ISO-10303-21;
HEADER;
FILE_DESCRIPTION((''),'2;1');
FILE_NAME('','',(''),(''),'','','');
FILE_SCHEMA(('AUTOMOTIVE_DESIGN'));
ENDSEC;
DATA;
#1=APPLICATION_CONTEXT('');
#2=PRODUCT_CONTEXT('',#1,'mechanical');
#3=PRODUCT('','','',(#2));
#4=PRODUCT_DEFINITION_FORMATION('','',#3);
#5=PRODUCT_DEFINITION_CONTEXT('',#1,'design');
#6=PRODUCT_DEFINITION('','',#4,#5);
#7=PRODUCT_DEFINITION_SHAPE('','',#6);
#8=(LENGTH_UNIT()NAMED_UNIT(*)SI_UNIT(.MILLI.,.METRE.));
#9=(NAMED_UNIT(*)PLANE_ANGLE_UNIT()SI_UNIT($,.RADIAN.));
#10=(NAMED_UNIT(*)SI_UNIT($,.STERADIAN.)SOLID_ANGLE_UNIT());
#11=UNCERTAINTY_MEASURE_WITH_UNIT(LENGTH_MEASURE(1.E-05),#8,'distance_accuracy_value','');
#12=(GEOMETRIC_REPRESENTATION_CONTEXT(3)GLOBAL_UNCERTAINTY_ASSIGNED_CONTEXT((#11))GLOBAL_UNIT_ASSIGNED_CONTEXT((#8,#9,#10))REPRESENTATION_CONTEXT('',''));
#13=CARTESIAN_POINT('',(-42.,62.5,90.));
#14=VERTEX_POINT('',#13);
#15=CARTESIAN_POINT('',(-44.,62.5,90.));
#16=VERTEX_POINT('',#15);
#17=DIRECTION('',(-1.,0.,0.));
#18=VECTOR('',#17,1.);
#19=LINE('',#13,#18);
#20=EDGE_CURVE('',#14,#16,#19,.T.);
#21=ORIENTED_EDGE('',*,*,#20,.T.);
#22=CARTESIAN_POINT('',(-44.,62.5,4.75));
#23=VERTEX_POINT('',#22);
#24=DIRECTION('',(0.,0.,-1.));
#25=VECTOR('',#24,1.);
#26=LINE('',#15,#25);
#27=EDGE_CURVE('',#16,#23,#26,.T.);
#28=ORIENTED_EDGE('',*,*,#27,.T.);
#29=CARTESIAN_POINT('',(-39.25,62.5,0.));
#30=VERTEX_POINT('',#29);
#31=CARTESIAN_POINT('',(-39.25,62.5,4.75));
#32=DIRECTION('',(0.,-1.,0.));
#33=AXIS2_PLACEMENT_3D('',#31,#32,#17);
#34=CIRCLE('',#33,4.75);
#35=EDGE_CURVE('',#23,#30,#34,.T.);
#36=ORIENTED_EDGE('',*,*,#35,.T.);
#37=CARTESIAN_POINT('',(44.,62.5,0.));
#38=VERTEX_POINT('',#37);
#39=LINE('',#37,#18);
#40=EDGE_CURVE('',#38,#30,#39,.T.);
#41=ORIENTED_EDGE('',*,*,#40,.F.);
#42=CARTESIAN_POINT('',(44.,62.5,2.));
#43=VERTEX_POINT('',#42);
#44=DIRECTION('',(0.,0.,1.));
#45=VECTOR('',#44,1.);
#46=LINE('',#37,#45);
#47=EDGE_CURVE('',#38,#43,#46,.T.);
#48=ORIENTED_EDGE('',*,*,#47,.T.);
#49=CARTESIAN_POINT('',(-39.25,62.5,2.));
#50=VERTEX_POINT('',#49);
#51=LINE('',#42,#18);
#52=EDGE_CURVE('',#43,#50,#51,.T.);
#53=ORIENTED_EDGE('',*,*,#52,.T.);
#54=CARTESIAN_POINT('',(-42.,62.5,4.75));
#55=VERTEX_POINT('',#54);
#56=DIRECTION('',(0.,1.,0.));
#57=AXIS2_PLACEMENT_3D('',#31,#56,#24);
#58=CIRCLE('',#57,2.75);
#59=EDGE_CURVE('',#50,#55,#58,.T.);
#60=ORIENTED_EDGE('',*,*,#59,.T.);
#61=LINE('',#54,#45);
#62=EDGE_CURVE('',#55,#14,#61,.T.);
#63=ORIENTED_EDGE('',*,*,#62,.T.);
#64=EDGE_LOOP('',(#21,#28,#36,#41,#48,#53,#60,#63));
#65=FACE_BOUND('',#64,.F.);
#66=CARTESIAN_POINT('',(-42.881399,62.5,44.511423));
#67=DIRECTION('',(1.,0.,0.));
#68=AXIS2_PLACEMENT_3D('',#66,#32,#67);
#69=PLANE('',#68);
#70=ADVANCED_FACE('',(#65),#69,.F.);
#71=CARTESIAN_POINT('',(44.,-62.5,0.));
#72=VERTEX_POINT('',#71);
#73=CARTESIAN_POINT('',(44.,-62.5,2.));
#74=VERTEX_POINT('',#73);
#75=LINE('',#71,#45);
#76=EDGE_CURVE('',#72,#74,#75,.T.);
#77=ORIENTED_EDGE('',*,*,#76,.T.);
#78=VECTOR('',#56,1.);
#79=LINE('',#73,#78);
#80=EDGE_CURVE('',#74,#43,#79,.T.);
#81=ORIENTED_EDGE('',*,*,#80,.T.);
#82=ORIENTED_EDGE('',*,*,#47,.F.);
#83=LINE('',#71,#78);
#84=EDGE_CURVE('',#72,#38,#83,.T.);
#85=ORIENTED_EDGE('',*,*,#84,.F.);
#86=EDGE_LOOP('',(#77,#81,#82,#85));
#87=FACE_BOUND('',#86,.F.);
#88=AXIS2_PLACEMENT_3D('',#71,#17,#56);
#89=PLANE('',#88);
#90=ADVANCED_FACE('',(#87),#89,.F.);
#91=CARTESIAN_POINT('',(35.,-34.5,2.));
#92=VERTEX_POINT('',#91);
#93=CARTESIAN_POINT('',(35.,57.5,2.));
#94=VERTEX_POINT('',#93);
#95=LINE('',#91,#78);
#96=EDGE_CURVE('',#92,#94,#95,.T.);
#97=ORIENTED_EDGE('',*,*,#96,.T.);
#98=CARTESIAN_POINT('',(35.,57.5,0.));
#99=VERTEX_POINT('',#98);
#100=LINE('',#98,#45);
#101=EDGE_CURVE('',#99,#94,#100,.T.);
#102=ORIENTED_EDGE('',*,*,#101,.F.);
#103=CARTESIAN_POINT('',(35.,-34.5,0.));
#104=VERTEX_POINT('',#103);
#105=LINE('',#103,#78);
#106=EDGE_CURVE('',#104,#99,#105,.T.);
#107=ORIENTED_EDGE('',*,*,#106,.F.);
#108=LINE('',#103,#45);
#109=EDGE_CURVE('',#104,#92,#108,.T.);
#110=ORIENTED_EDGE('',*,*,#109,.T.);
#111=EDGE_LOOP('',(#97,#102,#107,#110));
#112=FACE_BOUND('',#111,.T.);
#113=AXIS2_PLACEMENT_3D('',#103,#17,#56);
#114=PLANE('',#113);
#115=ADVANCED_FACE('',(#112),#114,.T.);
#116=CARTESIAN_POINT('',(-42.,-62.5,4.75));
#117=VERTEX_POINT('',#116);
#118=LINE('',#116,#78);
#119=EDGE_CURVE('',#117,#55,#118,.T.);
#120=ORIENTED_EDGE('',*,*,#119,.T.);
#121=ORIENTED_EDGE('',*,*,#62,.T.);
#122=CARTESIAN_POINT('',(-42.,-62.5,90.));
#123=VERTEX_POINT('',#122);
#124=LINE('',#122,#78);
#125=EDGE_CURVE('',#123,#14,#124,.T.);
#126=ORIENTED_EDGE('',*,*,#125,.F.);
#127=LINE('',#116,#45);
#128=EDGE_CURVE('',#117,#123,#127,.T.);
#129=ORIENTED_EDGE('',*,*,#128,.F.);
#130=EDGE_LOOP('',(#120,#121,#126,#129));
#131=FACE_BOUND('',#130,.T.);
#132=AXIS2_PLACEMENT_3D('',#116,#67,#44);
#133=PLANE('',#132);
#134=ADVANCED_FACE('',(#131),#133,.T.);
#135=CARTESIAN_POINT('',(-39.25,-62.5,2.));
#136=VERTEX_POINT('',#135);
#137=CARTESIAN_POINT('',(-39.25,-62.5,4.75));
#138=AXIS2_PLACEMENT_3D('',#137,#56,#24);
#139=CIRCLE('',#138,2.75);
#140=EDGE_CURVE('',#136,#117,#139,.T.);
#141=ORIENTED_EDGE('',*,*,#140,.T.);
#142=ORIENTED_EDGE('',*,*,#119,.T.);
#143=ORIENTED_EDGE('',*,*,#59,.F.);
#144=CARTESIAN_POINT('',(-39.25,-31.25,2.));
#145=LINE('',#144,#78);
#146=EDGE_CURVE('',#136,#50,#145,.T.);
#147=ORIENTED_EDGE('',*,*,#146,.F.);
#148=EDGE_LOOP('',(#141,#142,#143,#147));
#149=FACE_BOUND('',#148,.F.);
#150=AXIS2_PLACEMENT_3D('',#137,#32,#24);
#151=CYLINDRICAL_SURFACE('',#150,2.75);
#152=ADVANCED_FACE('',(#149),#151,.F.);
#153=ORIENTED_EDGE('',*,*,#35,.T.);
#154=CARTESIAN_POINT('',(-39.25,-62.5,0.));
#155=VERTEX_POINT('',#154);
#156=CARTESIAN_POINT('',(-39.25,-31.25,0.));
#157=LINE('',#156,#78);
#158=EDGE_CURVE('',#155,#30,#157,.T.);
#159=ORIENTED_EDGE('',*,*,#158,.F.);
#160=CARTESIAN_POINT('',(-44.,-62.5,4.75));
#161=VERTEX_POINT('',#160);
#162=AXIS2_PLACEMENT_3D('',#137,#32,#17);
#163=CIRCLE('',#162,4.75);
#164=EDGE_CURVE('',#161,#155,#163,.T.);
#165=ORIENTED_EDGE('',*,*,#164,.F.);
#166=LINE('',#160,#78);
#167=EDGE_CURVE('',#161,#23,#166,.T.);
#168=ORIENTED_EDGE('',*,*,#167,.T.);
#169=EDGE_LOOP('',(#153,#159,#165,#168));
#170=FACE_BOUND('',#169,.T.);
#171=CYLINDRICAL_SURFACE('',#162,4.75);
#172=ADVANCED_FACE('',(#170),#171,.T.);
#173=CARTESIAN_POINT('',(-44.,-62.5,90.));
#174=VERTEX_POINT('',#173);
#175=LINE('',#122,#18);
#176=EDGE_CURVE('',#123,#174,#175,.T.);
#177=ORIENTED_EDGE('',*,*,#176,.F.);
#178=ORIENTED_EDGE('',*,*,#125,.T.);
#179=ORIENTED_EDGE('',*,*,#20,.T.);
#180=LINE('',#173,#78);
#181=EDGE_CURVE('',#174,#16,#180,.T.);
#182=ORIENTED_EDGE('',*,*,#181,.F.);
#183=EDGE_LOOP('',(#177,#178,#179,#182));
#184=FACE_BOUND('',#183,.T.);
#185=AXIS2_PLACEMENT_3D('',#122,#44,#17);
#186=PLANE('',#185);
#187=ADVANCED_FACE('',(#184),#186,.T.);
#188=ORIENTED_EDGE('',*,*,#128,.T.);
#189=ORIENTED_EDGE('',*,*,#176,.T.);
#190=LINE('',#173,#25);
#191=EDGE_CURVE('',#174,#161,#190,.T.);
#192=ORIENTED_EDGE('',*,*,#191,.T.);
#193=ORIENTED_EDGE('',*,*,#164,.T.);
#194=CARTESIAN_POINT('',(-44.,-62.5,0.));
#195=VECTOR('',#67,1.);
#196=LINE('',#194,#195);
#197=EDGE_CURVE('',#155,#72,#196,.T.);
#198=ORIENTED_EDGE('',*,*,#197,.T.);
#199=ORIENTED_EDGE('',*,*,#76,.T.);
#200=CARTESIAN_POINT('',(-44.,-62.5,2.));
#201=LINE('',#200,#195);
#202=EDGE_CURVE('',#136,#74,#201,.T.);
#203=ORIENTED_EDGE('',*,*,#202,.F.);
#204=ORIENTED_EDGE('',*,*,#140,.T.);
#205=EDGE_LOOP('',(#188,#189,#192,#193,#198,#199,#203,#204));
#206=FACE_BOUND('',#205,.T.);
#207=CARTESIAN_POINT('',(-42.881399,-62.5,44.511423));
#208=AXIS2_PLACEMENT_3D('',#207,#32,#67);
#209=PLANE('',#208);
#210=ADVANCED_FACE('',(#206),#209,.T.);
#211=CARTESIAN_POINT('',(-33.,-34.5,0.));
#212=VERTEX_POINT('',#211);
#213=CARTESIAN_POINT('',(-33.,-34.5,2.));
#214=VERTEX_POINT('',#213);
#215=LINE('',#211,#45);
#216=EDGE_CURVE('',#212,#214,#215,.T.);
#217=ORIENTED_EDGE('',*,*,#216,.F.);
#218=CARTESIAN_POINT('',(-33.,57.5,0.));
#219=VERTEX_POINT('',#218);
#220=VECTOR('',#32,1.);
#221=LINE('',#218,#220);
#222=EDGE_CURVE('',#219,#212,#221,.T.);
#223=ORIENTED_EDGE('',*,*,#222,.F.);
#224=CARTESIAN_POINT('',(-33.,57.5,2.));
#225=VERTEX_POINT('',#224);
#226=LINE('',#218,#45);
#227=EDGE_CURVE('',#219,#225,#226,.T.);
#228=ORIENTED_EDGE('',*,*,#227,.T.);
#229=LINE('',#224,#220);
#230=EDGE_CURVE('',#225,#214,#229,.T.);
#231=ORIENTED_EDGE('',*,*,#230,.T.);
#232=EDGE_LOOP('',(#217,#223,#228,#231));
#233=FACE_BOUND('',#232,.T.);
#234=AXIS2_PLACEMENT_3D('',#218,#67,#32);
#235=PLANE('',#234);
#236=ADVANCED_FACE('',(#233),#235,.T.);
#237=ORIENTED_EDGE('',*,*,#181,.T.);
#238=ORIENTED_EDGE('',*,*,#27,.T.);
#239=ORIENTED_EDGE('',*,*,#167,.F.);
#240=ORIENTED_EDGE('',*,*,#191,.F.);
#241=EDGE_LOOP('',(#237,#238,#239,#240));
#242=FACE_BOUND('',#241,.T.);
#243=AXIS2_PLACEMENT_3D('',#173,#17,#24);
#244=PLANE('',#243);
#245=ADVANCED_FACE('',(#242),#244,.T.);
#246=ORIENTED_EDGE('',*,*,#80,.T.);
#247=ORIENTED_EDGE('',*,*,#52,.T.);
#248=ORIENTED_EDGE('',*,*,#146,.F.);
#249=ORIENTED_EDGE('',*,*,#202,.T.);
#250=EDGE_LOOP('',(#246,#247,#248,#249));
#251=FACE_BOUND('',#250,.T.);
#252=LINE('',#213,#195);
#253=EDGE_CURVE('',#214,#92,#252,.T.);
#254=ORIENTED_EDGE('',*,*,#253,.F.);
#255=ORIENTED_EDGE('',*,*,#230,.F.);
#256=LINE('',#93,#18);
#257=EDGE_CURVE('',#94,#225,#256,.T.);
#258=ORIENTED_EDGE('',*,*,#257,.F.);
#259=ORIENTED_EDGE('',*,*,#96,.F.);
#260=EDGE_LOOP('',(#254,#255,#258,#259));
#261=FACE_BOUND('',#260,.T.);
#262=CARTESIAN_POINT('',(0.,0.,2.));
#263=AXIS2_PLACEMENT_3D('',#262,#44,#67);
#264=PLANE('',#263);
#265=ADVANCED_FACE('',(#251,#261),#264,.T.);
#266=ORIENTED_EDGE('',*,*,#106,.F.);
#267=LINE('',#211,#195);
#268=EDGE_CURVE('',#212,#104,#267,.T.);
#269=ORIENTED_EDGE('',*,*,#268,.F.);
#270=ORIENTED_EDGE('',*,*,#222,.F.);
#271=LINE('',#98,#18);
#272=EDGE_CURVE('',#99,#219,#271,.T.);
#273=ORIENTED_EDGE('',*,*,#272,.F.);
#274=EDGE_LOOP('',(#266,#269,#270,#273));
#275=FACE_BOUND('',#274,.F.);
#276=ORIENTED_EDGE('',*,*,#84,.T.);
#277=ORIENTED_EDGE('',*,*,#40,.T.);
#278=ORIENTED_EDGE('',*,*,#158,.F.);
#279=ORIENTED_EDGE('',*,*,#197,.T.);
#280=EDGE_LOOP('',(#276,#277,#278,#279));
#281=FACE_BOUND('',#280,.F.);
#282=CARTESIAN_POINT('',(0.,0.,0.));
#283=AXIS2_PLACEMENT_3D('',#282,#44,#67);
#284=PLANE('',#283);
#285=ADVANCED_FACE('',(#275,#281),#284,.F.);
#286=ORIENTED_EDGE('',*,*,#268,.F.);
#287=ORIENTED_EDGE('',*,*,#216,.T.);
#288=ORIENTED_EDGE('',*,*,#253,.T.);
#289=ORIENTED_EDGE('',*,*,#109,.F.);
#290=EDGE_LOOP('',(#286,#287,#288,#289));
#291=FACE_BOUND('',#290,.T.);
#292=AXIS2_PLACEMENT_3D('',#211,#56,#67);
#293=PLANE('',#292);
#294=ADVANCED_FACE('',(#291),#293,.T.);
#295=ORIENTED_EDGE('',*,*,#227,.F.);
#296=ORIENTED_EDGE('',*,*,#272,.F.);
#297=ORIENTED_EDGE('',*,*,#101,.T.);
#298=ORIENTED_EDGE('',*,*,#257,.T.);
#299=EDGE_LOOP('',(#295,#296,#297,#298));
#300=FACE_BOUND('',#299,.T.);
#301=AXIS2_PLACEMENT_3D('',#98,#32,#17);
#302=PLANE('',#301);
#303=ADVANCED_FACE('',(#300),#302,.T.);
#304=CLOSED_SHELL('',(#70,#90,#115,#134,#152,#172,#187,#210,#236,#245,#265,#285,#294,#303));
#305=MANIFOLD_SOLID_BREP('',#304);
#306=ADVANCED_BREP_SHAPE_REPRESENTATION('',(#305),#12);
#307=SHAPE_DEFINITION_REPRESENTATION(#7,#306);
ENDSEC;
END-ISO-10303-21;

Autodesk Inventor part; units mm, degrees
ref_plane "YZ Plane" through (0, 0, 0) normal (1, 0, 0) x (0, 1, 0)
ref_plane "XZ Plane" through (0, 0, 0) normal (0, 1, 0) x (-1, 0, 0)
ref_plane "XY Plane" through (0, 0, 0) normal (0, 0, 1) x (1, 0, 0)
sketch "Sketch1" plane through (0, 0, 0) normal (0, 0, 1) x (1, 0, 0)
  line L0 (-44, -62.5) -> (44, -62.5)
  line L1 (44, -62.5) -> (44, 62.5)
  line L2 (44, 62.5) -> (-44, 62.5)
  line L3 (-44, 62.5) -> (-44, -62.5)
  line L4 (-44, -62.5) -> (44, 62.5) construction
  line L5 (44, -62.5) -> (-44, 62.5) construction
  line L6 (35, 57.5) -> (-33, 57.5)
  line L7 (-33, 57.5) -> (-33, -34.5)
  line L8 (-33, -34.5) -> (35, -34.5)
  line L9 (35, -34.5) -> (35, 57.5)
  point P0 (0, 0)
  dimension "d154" = 88
  dimension "d155" = 125
  dimension "d185" = 68
  dimension "d186" = 92
  dimension "d187" = 11
  dimension "d188" = 9
  dimension "d190" = 5
extrude "Plate5" add sketch "Sketch1" along normal blind 2
sketch "Sketch7" plane through (-42, -62.5, 0) normal (-1, 0, 0) x (0, -1, 0)
  line L0 (-125, 0) -> (0, 0)
  line L1 (0, 0) -> (0, 90)
  line L2 (0, 90) -> (-125, 90)
  line L3 (-125, 90) -> (-125, 0)
edge flange "Flange3" height 90 angle 90 thickness 2 bend radius 2.75 thickness toward (-1, 0, 0) relief round relief width 2 relief depth 1 edges at (-44, 0, 2) wall of the first edge with corners at (-42, 62.5, 0) (-42, -62.5, 0) (-42, -62.5, 90) (-42, 62.5, 90)
bend "Bend3"
corner "Corner3"
sketch "Sketch9" plane through (-44, -62.5, 90) normal (-1, 0, 0) x (0, 0, 1)
  line L0 (-27.375, 69.75) -> (-57.875, 69.75)
  line L1 (-57.875, 69.75) -> (-57.875, 100.25)
  line L2 (-57.875, 100.25) -> (-27.375, 100.25)
  line L3 (-27.375, 100.25) -> (-27.375, 69.75)
  line L4 (-27.375, 69.75) -> (-57.875, 100.25) construction
  line L5 (-57.875, 69.75) -> (-27.375, 100.25) construction
  circle A0 centre (-19.625, 62) radius 2.5
  circle A1 centre (-65.625, 62) radius 2.5
  circle A2 centre (-65.625, 108) radius 2.5
  circle A3 centre (-19.625, 108) radius 2.5
  circle A4 centre (-42.625, 85) radius 32.5269 construction
  line L6 (-57.875, 69.75) -> (-65.625, 62) construction
  line L7 (-17.125, 59.5) -> (-68.125, 59.5) construction
  line L8 (-68.125, 59.5) -> (-68.125, 110.5) construction
  line L9 (-68.125, 110.5) -> (-17.125, 110.5) construction
  line L10 (-17.125, 110.5) -> (-17.125, 59.5) construction
  line L11 (-17.125, 59.5) -> (-68.125, 110.5) construction
  line L12 (-68.125, 59.5) -> (-17.125, 110.5) construction
  line L13 (-85.25, 125) -> (0, 125) projected
  line L14 (-42.625, 125) -> (-42.625, 85) construction
  circle A5 centre (-65.625, 108) radius 10.9602 construction
  line L15 (-19.625, 62) -> (-65.625, 62) construction
  line L16 (-65.625, 62) -> (-65.625, 108) construction
  line L17 (-65.625, 108) -> (-19.625, 108) construction
  line L18 (-19.625, 108) -> (-19.625, 62) construction
  line L19 (-19.625, 62) -> (-65.625, 108) construction
  line L20 (-65.625, 62) -> (-19.625, 108) construction
  point P0 (-90, 62.5)
  point P1 (-104.8197, 150.8767)
  point P2 (-104.8197, 150.8767)
  dimension "d181" = 21.9203
  dimension "d174" = 30.5
  dimension "d175" = 30.5
  dimension "d176" = 5
  dimension "d179" = 40
  dimension "d180" = 51
  dimension "d184" = 46
cut "Cut2" [suppressed]
properties part number "PRS 8652 FDS Central tube wall_940" material "Stainless Steel"
